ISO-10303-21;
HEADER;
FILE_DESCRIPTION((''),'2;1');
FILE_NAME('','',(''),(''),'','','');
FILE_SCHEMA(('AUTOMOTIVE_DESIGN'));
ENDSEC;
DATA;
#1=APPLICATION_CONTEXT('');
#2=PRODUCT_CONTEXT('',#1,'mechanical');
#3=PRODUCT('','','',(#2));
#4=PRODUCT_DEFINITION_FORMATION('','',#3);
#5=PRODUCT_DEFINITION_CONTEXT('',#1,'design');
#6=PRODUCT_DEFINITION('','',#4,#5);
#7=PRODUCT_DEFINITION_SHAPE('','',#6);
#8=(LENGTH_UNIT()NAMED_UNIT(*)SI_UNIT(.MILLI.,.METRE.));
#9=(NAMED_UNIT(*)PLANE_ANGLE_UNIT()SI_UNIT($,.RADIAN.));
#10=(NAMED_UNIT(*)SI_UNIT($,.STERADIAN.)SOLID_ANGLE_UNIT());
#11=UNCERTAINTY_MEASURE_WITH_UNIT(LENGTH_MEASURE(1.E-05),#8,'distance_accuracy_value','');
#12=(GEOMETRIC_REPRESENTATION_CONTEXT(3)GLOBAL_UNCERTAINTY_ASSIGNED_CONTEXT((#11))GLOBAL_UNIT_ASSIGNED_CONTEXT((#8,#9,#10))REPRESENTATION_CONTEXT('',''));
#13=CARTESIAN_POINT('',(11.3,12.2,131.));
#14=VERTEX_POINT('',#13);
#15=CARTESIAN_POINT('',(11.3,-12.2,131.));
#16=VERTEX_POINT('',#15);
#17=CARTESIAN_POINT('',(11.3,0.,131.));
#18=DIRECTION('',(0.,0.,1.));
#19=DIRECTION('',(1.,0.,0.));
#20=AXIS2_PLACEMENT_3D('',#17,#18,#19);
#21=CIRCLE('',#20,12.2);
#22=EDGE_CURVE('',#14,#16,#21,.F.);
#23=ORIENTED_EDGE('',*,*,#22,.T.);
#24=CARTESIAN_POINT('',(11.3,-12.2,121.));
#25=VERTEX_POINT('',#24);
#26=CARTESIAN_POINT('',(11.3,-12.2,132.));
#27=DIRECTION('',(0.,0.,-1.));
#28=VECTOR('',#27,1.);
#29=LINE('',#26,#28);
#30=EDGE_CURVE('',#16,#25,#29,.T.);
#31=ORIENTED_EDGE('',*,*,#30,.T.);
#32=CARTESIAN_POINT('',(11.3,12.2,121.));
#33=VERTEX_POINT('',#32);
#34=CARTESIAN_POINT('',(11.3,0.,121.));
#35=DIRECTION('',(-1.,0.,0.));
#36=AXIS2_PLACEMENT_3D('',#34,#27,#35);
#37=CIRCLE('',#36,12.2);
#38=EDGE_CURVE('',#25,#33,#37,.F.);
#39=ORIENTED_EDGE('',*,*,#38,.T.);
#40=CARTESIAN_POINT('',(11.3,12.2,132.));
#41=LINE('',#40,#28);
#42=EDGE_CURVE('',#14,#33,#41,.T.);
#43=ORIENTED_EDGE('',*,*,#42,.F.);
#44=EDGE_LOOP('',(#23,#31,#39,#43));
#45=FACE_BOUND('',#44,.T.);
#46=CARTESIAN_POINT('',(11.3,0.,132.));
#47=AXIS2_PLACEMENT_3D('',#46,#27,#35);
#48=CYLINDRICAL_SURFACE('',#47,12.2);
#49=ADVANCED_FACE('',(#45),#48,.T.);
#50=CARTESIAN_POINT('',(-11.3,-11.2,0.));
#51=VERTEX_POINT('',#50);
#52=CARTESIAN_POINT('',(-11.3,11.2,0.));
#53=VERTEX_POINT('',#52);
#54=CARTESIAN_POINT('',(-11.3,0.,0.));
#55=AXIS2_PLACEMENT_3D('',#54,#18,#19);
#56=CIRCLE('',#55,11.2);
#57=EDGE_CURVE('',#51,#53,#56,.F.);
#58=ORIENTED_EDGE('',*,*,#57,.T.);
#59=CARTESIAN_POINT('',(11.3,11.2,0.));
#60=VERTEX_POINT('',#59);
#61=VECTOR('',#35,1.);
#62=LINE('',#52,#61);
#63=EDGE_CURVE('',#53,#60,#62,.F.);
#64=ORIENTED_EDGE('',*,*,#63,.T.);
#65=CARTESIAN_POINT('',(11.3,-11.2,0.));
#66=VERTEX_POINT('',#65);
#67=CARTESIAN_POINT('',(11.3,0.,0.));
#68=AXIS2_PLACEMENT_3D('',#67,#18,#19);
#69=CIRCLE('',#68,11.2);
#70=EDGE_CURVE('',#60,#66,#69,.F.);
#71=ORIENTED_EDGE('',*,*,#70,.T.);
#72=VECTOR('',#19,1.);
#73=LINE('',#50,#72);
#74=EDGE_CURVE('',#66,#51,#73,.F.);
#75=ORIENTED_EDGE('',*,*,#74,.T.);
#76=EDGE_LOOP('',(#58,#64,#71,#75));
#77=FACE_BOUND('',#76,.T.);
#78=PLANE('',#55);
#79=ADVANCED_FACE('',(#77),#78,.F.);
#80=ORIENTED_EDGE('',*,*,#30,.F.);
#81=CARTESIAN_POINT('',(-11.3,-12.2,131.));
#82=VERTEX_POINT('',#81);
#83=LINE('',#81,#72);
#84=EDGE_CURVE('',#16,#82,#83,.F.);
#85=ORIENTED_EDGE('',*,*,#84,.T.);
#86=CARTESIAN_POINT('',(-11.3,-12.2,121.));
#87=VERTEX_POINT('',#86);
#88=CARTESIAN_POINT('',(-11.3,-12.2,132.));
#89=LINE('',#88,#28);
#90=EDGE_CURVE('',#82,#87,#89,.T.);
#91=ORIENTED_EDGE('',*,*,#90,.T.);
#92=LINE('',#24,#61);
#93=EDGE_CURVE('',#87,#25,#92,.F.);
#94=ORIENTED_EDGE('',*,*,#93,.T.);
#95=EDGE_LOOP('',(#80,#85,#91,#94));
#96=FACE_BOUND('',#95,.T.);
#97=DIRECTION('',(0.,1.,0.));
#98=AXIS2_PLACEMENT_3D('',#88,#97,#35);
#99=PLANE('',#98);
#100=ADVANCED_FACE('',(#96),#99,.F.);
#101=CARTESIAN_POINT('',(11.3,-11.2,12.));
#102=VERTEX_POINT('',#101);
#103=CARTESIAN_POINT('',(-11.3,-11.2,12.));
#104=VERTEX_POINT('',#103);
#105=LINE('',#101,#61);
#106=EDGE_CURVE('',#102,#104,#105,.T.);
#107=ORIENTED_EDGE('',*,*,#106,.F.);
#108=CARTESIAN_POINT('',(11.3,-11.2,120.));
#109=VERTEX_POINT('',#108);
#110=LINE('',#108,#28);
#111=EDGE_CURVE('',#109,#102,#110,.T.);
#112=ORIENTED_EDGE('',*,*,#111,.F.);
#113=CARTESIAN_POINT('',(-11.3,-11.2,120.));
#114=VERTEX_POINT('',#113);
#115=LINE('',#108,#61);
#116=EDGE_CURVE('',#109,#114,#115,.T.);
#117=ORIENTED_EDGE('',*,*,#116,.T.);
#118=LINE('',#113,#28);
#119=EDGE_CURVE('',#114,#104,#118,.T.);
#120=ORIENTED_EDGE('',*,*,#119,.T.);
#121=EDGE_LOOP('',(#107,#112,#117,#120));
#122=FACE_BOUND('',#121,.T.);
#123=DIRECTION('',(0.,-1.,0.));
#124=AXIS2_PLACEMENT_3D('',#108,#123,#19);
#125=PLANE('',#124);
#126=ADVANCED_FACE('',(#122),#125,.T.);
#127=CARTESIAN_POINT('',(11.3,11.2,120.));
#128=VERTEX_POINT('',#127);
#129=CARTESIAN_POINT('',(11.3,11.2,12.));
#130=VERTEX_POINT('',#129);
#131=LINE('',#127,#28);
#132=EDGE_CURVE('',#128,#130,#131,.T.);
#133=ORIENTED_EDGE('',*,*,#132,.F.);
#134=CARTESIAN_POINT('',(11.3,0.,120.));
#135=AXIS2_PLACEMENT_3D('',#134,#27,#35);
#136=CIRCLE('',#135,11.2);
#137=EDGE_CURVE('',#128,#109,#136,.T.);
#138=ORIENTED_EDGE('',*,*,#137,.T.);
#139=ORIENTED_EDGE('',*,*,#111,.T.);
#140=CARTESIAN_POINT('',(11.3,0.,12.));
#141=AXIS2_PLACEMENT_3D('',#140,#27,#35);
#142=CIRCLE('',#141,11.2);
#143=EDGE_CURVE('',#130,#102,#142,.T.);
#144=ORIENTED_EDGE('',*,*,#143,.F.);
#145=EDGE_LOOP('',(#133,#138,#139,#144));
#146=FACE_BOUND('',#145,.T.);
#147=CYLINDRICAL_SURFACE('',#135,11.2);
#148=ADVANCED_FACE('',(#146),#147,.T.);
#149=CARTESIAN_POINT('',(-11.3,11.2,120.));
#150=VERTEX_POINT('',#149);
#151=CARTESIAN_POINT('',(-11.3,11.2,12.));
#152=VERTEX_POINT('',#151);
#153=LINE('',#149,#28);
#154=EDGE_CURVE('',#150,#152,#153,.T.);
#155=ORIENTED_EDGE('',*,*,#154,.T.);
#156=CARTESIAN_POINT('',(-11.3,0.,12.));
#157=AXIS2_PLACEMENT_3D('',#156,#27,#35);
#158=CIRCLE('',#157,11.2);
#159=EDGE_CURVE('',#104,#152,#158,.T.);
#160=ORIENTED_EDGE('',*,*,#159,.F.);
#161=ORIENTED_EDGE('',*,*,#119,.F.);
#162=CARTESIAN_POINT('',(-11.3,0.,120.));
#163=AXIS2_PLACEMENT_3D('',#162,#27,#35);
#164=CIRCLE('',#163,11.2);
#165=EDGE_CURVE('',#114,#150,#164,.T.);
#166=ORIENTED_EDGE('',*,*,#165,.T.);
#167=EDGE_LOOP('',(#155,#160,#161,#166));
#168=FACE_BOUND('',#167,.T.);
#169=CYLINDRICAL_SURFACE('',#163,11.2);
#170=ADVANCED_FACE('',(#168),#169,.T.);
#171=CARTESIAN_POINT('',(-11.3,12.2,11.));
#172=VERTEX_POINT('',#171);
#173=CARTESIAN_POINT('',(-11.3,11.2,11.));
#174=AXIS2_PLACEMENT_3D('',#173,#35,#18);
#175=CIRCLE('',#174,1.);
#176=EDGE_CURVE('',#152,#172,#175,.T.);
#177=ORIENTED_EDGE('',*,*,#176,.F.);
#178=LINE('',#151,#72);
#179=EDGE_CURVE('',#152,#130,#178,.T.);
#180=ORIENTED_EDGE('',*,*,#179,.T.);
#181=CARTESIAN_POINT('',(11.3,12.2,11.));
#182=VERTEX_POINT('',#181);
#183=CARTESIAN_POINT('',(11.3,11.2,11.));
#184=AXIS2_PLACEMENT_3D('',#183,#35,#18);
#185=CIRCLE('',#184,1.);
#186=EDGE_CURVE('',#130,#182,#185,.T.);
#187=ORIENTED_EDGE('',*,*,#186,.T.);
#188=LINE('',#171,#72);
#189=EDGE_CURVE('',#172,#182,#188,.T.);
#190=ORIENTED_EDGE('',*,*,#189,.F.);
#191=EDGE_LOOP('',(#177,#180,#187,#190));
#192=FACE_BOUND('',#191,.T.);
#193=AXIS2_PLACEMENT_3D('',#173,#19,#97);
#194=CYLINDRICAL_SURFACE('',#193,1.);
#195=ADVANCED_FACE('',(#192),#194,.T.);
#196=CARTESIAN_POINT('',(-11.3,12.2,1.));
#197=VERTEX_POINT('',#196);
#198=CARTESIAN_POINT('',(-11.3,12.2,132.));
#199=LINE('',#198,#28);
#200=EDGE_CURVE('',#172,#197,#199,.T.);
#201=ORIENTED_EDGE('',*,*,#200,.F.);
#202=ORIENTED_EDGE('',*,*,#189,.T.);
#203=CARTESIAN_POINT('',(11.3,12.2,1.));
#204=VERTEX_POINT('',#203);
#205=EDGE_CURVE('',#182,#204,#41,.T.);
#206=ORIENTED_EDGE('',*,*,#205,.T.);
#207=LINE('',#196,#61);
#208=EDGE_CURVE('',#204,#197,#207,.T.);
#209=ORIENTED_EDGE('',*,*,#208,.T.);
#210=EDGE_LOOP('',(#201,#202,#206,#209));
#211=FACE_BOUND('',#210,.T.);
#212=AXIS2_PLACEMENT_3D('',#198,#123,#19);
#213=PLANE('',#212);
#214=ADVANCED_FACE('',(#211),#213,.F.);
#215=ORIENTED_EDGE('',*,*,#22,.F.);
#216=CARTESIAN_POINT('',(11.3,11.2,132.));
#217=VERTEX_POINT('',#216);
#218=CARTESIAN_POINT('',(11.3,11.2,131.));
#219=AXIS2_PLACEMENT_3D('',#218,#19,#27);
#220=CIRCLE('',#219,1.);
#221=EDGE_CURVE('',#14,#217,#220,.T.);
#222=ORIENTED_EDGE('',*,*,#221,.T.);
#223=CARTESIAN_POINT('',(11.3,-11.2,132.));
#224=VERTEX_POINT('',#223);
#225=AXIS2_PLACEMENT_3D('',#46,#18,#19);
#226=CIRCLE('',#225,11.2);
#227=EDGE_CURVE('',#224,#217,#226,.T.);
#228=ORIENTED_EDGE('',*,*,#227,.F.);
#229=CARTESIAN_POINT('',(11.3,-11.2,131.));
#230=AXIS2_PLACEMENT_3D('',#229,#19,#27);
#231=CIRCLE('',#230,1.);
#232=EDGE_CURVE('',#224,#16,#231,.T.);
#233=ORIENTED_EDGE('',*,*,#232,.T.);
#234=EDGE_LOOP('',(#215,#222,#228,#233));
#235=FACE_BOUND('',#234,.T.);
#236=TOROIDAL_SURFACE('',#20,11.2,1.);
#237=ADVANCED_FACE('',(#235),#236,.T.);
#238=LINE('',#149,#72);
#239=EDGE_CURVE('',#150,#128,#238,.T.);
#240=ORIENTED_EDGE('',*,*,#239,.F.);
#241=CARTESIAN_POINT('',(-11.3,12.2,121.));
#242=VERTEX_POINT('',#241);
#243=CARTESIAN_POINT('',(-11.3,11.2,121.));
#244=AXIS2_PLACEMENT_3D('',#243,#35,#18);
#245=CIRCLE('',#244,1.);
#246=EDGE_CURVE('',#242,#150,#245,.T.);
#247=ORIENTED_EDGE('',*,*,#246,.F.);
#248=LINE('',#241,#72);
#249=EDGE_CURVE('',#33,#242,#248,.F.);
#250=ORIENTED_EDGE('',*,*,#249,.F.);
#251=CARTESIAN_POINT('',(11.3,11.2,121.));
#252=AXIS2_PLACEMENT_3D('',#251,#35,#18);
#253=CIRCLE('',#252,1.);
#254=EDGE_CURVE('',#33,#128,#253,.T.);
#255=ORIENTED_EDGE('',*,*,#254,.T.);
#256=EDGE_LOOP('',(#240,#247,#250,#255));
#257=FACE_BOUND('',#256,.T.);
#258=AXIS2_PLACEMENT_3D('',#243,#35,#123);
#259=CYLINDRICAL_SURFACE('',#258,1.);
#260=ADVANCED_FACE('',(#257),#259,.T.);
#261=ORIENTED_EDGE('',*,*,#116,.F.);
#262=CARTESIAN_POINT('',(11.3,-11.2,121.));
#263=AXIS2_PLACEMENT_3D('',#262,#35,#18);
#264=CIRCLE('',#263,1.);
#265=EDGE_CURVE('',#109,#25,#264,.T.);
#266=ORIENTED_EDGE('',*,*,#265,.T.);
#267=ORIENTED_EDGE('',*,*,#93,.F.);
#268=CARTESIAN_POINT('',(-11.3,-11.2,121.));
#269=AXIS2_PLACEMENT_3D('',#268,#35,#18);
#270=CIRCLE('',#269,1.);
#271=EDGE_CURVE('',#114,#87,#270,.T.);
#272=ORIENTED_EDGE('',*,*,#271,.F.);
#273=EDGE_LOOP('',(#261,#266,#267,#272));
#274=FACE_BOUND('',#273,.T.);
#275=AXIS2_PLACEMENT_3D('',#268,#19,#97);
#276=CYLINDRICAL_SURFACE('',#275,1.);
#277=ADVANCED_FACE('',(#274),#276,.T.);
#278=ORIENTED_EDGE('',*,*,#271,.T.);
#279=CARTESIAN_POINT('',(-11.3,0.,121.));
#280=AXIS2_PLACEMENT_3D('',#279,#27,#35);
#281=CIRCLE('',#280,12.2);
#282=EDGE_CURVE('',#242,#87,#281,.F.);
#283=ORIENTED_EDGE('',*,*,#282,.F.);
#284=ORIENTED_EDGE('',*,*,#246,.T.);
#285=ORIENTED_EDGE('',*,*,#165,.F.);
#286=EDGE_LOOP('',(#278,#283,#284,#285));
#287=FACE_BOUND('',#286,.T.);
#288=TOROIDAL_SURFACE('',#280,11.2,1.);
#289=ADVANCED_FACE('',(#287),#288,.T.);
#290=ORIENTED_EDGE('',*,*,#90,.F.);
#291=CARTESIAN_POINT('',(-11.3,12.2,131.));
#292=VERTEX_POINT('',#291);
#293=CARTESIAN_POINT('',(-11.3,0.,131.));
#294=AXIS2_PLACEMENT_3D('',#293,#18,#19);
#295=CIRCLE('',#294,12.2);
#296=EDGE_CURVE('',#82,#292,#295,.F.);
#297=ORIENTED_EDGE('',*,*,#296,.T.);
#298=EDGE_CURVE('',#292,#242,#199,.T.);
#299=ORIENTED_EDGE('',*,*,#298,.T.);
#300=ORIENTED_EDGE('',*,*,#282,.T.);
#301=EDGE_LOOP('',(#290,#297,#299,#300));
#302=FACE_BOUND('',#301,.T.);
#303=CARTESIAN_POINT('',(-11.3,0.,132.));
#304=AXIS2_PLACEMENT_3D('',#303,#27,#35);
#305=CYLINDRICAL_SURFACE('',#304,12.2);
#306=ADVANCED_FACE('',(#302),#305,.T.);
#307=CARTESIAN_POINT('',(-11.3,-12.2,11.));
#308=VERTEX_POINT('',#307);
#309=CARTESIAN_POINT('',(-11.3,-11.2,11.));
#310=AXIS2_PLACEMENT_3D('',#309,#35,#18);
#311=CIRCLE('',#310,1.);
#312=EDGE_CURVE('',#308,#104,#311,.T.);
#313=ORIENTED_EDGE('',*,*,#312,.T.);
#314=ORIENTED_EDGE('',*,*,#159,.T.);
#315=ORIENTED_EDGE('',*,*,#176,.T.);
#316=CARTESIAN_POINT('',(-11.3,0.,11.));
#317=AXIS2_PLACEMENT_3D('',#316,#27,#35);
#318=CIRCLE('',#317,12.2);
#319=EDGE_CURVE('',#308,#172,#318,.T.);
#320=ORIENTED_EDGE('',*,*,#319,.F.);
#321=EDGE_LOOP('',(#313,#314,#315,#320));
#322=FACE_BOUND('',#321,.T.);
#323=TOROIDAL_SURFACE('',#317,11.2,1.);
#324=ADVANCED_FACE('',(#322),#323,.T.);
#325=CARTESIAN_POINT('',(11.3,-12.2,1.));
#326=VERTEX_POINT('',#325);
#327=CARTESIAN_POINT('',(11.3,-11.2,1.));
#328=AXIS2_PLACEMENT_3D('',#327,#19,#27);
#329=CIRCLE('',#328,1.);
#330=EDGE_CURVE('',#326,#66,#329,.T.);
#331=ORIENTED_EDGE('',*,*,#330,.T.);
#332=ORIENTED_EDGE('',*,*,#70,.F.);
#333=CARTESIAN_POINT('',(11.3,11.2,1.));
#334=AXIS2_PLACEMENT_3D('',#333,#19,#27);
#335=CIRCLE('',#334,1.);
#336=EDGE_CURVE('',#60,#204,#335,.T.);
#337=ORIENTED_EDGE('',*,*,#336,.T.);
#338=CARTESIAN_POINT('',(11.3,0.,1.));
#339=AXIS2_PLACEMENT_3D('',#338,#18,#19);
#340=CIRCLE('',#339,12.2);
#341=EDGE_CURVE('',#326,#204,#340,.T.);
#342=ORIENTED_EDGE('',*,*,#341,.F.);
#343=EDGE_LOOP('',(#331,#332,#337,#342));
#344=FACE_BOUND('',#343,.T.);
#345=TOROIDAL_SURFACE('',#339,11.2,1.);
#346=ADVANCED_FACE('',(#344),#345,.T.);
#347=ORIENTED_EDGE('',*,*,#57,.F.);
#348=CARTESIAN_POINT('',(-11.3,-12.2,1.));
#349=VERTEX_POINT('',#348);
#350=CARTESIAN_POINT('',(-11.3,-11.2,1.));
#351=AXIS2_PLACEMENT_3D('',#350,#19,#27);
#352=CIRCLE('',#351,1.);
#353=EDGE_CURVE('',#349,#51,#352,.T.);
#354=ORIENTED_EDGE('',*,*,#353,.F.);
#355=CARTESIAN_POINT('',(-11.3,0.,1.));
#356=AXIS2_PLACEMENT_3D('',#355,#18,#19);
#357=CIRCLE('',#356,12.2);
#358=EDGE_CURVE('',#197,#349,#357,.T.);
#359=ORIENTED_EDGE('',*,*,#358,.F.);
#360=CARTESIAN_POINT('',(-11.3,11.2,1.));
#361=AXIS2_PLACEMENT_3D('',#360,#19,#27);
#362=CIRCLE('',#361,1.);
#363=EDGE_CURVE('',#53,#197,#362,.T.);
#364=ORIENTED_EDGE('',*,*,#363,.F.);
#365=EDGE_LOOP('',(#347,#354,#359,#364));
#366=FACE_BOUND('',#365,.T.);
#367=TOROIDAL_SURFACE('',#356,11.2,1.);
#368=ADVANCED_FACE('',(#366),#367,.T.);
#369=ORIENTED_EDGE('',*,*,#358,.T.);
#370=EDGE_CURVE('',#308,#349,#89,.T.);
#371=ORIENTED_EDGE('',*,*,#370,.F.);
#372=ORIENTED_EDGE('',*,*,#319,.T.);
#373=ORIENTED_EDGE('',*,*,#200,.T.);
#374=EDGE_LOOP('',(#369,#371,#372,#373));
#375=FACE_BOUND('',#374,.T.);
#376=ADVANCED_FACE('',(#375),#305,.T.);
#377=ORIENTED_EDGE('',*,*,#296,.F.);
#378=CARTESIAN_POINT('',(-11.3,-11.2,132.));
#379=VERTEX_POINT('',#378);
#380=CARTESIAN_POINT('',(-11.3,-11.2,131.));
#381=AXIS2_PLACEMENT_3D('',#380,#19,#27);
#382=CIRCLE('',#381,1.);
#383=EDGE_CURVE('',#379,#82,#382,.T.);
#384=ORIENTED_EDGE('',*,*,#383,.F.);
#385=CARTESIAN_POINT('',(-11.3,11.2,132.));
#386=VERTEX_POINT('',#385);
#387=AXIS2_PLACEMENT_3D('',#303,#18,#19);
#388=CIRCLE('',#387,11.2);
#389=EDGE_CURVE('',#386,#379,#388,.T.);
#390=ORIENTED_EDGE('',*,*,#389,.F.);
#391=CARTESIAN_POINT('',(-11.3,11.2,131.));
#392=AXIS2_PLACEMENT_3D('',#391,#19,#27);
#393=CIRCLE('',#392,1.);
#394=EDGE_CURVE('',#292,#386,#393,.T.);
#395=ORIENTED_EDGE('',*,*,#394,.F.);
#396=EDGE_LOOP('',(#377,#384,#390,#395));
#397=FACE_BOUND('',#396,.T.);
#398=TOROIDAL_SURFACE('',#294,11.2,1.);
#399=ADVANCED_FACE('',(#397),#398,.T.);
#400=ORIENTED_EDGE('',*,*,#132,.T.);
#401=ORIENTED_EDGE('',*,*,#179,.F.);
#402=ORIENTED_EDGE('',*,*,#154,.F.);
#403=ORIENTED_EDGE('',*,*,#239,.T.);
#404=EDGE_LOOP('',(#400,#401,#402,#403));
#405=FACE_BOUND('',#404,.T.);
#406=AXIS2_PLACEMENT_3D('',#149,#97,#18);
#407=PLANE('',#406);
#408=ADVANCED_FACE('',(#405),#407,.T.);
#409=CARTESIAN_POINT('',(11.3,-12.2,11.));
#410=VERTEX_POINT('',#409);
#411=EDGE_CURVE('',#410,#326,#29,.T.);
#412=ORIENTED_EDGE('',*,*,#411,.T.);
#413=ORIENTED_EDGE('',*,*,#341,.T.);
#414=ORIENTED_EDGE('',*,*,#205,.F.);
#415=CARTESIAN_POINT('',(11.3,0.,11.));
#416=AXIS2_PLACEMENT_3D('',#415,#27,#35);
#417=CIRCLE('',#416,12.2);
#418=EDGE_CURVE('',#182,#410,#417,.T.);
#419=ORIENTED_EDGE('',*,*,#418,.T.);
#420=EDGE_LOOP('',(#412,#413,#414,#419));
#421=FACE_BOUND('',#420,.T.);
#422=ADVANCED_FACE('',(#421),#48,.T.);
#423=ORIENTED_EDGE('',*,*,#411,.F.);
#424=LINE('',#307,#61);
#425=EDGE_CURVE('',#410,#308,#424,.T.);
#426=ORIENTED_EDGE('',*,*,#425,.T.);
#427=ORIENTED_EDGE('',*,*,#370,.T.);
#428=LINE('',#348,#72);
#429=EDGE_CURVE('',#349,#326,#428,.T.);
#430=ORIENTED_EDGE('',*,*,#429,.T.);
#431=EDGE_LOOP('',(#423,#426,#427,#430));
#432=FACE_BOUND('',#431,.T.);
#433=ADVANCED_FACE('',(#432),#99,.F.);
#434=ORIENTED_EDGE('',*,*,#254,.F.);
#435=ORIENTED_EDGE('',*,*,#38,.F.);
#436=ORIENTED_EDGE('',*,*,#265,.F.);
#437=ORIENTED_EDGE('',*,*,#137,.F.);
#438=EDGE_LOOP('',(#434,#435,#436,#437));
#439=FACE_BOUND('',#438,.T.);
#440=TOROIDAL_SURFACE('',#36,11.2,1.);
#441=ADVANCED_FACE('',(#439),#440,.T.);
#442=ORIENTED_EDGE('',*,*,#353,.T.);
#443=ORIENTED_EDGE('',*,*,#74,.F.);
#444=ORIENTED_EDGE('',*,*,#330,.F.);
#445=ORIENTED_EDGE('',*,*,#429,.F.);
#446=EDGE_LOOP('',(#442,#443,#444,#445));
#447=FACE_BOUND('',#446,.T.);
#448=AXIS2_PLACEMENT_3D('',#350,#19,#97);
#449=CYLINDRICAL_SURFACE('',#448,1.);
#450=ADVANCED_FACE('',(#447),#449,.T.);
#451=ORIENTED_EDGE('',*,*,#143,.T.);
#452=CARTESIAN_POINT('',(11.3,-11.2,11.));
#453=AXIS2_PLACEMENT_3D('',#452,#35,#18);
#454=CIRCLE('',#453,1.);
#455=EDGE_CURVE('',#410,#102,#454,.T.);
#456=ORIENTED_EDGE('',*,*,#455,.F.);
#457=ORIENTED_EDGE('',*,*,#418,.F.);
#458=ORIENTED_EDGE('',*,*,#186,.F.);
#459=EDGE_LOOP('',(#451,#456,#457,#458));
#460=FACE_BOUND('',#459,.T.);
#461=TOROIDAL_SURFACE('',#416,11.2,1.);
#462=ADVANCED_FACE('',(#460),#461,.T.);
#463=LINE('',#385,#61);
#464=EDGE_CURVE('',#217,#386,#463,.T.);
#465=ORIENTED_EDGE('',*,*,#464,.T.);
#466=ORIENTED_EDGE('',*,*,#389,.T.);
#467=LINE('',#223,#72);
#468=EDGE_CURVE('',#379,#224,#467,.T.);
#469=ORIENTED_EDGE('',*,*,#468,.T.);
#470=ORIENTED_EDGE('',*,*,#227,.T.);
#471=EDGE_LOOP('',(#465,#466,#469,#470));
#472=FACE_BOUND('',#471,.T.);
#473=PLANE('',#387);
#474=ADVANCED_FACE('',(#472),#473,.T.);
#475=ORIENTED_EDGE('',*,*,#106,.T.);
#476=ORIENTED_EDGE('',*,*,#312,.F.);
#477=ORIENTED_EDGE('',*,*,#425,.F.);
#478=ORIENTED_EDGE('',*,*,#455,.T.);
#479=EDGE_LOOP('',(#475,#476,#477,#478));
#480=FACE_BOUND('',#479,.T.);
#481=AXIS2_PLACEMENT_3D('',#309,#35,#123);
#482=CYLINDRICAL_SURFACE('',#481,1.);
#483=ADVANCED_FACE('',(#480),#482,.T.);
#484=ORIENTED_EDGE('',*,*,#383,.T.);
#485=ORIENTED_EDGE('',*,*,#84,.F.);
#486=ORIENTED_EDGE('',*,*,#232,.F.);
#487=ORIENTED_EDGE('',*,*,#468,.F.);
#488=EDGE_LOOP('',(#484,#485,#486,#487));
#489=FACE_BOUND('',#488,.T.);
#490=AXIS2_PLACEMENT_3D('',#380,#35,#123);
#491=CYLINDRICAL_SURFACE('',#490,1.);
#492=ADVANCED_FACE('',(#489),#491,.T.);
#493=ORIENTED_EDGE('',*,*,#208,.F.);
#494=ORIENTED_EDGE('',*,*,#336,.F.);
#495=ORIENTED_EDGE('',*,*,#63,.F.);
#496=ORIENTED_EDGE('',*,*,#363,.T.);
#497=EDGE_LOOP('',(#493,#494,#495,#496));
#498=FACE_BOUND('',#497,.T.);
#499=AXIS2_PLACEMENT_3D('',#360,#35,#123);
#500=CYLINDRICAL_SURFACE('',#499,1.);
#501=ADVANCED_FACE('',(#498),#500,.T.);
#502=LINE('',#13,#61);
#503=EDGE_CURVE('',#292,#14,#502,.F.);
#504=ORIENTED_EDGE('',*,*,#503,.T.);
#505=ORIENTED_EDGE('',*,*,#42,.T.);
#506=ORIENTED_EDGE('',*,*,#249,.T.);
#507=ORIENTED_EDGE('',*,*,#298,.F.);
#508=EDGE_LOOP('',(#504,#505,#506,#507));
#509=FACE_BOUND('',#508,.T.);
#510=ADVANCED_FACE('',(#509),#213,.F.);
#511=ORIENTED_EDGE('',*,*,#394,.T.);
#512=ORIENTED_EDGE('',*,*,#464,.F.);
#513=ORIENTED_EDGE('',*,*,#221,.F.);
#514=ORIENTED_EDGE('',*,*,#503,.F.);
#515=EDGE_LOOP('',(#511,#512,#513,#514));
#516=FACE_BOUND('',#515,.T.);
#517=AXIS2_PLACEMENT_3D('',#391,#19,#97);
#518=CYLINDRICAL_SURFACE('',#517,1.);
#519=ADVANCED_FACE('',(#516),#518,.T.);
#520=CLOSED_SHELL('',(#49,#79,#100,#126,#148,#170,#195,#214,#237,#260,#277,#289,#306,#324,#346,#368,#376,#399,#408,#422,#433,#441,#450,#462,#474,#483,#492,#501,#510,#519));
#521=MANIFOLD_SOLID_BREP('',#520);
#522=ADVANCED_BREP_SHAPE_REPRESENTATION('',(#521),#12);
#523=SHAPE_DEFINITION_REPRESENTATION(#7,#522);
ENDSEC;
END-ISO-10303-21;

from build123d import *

# Parameters (mm, degrees)
EXTRUDE_1_DEPTH     = 132
CUT_EXTRUDE_1_DEPTH = 108
FILLET_1_R          = 1


with BuildPart() as part:
    # 草图1 → 凸台-拉伸1 (new body)
    with BuildSketch(Plane.XY):
        with BuildLine():
            Line((-11.3, 12.2), (11.3, 12.2))
            ThreePointArc((11.3, 12.2), (23.5, 0), (11.3, -12.2))
            Line((11.3, -12.2), (-11.3, -12.2))
            ThreePointArc((-11.3, -12.2), (-23.5, 0), (-11.3, 12.2))
        make_face()
    extrude(amount=EXTRUDE_1_DEPTH)

    # 草图2 → 切除-拉伸1 (cut)
    with BuildSketch(Plane(origin=(0, 0, 12), x_dir=(-1, 0, 0), z_dir=(0, 0, -1))):
        with BuildLine():
            Line((11.3, 12.2), (-11.3, 12.2))
            ThreePointArc((-11.3, 12.2), (-23.5, 0), (-11.3, -12.2))
            Line((-11.3, -12.2), (11.3, -12.2))
            ThreePointArc((11.3, -12.2), (23.5, 0), (11.3, 12.2))
        make_face()
        with BuildLine():
            Line((11.3, 11.2), (-11.3, 11.2))
            ThreePointArc((-11.3, 11.2), (-22.5, 0), (-11.3, -11.2))
            Line((-11.3, -11.2), (11.3, -11.2))
            ThreePointArc((11.3, -11.2), (22.5, 0), (11.3, 11.2))
        make_face(mode=Mode.SUBTRACT)
    extrude(amount=-CUT_EXTRUDE_1_DEPTH, mode=Mode.SUBTRACT)

    # 圆角1
    fillet_1_edges = [part.edges().sort_by_distance(p)[0] for p in [
        (23.5, 0, 132),
        (0, 12.2, 132),
        (-23.5, 0, 120),
        (0, -12.2, 120),
        (23.5, 0, 120),
        (0, 12.2, 120),
        (-23.5, 0, 12),
        (0, 12.2, 12),
        (23.5, 0, 12),
        (0, -12.2, 12),
        (-23.5, 0, 132),
        (0, 12.2, 0),
        (23.5, 0, 0),
        (0, -12.2, 0),
        (-23.5, 0, 0),
        (0, -12.2, 132),
    ]]
    fillet(fillet_1_edges, radius=FILLET_1_R - 0.0001)  # a hair under: the kernel refuses the full size


solid = part.part
